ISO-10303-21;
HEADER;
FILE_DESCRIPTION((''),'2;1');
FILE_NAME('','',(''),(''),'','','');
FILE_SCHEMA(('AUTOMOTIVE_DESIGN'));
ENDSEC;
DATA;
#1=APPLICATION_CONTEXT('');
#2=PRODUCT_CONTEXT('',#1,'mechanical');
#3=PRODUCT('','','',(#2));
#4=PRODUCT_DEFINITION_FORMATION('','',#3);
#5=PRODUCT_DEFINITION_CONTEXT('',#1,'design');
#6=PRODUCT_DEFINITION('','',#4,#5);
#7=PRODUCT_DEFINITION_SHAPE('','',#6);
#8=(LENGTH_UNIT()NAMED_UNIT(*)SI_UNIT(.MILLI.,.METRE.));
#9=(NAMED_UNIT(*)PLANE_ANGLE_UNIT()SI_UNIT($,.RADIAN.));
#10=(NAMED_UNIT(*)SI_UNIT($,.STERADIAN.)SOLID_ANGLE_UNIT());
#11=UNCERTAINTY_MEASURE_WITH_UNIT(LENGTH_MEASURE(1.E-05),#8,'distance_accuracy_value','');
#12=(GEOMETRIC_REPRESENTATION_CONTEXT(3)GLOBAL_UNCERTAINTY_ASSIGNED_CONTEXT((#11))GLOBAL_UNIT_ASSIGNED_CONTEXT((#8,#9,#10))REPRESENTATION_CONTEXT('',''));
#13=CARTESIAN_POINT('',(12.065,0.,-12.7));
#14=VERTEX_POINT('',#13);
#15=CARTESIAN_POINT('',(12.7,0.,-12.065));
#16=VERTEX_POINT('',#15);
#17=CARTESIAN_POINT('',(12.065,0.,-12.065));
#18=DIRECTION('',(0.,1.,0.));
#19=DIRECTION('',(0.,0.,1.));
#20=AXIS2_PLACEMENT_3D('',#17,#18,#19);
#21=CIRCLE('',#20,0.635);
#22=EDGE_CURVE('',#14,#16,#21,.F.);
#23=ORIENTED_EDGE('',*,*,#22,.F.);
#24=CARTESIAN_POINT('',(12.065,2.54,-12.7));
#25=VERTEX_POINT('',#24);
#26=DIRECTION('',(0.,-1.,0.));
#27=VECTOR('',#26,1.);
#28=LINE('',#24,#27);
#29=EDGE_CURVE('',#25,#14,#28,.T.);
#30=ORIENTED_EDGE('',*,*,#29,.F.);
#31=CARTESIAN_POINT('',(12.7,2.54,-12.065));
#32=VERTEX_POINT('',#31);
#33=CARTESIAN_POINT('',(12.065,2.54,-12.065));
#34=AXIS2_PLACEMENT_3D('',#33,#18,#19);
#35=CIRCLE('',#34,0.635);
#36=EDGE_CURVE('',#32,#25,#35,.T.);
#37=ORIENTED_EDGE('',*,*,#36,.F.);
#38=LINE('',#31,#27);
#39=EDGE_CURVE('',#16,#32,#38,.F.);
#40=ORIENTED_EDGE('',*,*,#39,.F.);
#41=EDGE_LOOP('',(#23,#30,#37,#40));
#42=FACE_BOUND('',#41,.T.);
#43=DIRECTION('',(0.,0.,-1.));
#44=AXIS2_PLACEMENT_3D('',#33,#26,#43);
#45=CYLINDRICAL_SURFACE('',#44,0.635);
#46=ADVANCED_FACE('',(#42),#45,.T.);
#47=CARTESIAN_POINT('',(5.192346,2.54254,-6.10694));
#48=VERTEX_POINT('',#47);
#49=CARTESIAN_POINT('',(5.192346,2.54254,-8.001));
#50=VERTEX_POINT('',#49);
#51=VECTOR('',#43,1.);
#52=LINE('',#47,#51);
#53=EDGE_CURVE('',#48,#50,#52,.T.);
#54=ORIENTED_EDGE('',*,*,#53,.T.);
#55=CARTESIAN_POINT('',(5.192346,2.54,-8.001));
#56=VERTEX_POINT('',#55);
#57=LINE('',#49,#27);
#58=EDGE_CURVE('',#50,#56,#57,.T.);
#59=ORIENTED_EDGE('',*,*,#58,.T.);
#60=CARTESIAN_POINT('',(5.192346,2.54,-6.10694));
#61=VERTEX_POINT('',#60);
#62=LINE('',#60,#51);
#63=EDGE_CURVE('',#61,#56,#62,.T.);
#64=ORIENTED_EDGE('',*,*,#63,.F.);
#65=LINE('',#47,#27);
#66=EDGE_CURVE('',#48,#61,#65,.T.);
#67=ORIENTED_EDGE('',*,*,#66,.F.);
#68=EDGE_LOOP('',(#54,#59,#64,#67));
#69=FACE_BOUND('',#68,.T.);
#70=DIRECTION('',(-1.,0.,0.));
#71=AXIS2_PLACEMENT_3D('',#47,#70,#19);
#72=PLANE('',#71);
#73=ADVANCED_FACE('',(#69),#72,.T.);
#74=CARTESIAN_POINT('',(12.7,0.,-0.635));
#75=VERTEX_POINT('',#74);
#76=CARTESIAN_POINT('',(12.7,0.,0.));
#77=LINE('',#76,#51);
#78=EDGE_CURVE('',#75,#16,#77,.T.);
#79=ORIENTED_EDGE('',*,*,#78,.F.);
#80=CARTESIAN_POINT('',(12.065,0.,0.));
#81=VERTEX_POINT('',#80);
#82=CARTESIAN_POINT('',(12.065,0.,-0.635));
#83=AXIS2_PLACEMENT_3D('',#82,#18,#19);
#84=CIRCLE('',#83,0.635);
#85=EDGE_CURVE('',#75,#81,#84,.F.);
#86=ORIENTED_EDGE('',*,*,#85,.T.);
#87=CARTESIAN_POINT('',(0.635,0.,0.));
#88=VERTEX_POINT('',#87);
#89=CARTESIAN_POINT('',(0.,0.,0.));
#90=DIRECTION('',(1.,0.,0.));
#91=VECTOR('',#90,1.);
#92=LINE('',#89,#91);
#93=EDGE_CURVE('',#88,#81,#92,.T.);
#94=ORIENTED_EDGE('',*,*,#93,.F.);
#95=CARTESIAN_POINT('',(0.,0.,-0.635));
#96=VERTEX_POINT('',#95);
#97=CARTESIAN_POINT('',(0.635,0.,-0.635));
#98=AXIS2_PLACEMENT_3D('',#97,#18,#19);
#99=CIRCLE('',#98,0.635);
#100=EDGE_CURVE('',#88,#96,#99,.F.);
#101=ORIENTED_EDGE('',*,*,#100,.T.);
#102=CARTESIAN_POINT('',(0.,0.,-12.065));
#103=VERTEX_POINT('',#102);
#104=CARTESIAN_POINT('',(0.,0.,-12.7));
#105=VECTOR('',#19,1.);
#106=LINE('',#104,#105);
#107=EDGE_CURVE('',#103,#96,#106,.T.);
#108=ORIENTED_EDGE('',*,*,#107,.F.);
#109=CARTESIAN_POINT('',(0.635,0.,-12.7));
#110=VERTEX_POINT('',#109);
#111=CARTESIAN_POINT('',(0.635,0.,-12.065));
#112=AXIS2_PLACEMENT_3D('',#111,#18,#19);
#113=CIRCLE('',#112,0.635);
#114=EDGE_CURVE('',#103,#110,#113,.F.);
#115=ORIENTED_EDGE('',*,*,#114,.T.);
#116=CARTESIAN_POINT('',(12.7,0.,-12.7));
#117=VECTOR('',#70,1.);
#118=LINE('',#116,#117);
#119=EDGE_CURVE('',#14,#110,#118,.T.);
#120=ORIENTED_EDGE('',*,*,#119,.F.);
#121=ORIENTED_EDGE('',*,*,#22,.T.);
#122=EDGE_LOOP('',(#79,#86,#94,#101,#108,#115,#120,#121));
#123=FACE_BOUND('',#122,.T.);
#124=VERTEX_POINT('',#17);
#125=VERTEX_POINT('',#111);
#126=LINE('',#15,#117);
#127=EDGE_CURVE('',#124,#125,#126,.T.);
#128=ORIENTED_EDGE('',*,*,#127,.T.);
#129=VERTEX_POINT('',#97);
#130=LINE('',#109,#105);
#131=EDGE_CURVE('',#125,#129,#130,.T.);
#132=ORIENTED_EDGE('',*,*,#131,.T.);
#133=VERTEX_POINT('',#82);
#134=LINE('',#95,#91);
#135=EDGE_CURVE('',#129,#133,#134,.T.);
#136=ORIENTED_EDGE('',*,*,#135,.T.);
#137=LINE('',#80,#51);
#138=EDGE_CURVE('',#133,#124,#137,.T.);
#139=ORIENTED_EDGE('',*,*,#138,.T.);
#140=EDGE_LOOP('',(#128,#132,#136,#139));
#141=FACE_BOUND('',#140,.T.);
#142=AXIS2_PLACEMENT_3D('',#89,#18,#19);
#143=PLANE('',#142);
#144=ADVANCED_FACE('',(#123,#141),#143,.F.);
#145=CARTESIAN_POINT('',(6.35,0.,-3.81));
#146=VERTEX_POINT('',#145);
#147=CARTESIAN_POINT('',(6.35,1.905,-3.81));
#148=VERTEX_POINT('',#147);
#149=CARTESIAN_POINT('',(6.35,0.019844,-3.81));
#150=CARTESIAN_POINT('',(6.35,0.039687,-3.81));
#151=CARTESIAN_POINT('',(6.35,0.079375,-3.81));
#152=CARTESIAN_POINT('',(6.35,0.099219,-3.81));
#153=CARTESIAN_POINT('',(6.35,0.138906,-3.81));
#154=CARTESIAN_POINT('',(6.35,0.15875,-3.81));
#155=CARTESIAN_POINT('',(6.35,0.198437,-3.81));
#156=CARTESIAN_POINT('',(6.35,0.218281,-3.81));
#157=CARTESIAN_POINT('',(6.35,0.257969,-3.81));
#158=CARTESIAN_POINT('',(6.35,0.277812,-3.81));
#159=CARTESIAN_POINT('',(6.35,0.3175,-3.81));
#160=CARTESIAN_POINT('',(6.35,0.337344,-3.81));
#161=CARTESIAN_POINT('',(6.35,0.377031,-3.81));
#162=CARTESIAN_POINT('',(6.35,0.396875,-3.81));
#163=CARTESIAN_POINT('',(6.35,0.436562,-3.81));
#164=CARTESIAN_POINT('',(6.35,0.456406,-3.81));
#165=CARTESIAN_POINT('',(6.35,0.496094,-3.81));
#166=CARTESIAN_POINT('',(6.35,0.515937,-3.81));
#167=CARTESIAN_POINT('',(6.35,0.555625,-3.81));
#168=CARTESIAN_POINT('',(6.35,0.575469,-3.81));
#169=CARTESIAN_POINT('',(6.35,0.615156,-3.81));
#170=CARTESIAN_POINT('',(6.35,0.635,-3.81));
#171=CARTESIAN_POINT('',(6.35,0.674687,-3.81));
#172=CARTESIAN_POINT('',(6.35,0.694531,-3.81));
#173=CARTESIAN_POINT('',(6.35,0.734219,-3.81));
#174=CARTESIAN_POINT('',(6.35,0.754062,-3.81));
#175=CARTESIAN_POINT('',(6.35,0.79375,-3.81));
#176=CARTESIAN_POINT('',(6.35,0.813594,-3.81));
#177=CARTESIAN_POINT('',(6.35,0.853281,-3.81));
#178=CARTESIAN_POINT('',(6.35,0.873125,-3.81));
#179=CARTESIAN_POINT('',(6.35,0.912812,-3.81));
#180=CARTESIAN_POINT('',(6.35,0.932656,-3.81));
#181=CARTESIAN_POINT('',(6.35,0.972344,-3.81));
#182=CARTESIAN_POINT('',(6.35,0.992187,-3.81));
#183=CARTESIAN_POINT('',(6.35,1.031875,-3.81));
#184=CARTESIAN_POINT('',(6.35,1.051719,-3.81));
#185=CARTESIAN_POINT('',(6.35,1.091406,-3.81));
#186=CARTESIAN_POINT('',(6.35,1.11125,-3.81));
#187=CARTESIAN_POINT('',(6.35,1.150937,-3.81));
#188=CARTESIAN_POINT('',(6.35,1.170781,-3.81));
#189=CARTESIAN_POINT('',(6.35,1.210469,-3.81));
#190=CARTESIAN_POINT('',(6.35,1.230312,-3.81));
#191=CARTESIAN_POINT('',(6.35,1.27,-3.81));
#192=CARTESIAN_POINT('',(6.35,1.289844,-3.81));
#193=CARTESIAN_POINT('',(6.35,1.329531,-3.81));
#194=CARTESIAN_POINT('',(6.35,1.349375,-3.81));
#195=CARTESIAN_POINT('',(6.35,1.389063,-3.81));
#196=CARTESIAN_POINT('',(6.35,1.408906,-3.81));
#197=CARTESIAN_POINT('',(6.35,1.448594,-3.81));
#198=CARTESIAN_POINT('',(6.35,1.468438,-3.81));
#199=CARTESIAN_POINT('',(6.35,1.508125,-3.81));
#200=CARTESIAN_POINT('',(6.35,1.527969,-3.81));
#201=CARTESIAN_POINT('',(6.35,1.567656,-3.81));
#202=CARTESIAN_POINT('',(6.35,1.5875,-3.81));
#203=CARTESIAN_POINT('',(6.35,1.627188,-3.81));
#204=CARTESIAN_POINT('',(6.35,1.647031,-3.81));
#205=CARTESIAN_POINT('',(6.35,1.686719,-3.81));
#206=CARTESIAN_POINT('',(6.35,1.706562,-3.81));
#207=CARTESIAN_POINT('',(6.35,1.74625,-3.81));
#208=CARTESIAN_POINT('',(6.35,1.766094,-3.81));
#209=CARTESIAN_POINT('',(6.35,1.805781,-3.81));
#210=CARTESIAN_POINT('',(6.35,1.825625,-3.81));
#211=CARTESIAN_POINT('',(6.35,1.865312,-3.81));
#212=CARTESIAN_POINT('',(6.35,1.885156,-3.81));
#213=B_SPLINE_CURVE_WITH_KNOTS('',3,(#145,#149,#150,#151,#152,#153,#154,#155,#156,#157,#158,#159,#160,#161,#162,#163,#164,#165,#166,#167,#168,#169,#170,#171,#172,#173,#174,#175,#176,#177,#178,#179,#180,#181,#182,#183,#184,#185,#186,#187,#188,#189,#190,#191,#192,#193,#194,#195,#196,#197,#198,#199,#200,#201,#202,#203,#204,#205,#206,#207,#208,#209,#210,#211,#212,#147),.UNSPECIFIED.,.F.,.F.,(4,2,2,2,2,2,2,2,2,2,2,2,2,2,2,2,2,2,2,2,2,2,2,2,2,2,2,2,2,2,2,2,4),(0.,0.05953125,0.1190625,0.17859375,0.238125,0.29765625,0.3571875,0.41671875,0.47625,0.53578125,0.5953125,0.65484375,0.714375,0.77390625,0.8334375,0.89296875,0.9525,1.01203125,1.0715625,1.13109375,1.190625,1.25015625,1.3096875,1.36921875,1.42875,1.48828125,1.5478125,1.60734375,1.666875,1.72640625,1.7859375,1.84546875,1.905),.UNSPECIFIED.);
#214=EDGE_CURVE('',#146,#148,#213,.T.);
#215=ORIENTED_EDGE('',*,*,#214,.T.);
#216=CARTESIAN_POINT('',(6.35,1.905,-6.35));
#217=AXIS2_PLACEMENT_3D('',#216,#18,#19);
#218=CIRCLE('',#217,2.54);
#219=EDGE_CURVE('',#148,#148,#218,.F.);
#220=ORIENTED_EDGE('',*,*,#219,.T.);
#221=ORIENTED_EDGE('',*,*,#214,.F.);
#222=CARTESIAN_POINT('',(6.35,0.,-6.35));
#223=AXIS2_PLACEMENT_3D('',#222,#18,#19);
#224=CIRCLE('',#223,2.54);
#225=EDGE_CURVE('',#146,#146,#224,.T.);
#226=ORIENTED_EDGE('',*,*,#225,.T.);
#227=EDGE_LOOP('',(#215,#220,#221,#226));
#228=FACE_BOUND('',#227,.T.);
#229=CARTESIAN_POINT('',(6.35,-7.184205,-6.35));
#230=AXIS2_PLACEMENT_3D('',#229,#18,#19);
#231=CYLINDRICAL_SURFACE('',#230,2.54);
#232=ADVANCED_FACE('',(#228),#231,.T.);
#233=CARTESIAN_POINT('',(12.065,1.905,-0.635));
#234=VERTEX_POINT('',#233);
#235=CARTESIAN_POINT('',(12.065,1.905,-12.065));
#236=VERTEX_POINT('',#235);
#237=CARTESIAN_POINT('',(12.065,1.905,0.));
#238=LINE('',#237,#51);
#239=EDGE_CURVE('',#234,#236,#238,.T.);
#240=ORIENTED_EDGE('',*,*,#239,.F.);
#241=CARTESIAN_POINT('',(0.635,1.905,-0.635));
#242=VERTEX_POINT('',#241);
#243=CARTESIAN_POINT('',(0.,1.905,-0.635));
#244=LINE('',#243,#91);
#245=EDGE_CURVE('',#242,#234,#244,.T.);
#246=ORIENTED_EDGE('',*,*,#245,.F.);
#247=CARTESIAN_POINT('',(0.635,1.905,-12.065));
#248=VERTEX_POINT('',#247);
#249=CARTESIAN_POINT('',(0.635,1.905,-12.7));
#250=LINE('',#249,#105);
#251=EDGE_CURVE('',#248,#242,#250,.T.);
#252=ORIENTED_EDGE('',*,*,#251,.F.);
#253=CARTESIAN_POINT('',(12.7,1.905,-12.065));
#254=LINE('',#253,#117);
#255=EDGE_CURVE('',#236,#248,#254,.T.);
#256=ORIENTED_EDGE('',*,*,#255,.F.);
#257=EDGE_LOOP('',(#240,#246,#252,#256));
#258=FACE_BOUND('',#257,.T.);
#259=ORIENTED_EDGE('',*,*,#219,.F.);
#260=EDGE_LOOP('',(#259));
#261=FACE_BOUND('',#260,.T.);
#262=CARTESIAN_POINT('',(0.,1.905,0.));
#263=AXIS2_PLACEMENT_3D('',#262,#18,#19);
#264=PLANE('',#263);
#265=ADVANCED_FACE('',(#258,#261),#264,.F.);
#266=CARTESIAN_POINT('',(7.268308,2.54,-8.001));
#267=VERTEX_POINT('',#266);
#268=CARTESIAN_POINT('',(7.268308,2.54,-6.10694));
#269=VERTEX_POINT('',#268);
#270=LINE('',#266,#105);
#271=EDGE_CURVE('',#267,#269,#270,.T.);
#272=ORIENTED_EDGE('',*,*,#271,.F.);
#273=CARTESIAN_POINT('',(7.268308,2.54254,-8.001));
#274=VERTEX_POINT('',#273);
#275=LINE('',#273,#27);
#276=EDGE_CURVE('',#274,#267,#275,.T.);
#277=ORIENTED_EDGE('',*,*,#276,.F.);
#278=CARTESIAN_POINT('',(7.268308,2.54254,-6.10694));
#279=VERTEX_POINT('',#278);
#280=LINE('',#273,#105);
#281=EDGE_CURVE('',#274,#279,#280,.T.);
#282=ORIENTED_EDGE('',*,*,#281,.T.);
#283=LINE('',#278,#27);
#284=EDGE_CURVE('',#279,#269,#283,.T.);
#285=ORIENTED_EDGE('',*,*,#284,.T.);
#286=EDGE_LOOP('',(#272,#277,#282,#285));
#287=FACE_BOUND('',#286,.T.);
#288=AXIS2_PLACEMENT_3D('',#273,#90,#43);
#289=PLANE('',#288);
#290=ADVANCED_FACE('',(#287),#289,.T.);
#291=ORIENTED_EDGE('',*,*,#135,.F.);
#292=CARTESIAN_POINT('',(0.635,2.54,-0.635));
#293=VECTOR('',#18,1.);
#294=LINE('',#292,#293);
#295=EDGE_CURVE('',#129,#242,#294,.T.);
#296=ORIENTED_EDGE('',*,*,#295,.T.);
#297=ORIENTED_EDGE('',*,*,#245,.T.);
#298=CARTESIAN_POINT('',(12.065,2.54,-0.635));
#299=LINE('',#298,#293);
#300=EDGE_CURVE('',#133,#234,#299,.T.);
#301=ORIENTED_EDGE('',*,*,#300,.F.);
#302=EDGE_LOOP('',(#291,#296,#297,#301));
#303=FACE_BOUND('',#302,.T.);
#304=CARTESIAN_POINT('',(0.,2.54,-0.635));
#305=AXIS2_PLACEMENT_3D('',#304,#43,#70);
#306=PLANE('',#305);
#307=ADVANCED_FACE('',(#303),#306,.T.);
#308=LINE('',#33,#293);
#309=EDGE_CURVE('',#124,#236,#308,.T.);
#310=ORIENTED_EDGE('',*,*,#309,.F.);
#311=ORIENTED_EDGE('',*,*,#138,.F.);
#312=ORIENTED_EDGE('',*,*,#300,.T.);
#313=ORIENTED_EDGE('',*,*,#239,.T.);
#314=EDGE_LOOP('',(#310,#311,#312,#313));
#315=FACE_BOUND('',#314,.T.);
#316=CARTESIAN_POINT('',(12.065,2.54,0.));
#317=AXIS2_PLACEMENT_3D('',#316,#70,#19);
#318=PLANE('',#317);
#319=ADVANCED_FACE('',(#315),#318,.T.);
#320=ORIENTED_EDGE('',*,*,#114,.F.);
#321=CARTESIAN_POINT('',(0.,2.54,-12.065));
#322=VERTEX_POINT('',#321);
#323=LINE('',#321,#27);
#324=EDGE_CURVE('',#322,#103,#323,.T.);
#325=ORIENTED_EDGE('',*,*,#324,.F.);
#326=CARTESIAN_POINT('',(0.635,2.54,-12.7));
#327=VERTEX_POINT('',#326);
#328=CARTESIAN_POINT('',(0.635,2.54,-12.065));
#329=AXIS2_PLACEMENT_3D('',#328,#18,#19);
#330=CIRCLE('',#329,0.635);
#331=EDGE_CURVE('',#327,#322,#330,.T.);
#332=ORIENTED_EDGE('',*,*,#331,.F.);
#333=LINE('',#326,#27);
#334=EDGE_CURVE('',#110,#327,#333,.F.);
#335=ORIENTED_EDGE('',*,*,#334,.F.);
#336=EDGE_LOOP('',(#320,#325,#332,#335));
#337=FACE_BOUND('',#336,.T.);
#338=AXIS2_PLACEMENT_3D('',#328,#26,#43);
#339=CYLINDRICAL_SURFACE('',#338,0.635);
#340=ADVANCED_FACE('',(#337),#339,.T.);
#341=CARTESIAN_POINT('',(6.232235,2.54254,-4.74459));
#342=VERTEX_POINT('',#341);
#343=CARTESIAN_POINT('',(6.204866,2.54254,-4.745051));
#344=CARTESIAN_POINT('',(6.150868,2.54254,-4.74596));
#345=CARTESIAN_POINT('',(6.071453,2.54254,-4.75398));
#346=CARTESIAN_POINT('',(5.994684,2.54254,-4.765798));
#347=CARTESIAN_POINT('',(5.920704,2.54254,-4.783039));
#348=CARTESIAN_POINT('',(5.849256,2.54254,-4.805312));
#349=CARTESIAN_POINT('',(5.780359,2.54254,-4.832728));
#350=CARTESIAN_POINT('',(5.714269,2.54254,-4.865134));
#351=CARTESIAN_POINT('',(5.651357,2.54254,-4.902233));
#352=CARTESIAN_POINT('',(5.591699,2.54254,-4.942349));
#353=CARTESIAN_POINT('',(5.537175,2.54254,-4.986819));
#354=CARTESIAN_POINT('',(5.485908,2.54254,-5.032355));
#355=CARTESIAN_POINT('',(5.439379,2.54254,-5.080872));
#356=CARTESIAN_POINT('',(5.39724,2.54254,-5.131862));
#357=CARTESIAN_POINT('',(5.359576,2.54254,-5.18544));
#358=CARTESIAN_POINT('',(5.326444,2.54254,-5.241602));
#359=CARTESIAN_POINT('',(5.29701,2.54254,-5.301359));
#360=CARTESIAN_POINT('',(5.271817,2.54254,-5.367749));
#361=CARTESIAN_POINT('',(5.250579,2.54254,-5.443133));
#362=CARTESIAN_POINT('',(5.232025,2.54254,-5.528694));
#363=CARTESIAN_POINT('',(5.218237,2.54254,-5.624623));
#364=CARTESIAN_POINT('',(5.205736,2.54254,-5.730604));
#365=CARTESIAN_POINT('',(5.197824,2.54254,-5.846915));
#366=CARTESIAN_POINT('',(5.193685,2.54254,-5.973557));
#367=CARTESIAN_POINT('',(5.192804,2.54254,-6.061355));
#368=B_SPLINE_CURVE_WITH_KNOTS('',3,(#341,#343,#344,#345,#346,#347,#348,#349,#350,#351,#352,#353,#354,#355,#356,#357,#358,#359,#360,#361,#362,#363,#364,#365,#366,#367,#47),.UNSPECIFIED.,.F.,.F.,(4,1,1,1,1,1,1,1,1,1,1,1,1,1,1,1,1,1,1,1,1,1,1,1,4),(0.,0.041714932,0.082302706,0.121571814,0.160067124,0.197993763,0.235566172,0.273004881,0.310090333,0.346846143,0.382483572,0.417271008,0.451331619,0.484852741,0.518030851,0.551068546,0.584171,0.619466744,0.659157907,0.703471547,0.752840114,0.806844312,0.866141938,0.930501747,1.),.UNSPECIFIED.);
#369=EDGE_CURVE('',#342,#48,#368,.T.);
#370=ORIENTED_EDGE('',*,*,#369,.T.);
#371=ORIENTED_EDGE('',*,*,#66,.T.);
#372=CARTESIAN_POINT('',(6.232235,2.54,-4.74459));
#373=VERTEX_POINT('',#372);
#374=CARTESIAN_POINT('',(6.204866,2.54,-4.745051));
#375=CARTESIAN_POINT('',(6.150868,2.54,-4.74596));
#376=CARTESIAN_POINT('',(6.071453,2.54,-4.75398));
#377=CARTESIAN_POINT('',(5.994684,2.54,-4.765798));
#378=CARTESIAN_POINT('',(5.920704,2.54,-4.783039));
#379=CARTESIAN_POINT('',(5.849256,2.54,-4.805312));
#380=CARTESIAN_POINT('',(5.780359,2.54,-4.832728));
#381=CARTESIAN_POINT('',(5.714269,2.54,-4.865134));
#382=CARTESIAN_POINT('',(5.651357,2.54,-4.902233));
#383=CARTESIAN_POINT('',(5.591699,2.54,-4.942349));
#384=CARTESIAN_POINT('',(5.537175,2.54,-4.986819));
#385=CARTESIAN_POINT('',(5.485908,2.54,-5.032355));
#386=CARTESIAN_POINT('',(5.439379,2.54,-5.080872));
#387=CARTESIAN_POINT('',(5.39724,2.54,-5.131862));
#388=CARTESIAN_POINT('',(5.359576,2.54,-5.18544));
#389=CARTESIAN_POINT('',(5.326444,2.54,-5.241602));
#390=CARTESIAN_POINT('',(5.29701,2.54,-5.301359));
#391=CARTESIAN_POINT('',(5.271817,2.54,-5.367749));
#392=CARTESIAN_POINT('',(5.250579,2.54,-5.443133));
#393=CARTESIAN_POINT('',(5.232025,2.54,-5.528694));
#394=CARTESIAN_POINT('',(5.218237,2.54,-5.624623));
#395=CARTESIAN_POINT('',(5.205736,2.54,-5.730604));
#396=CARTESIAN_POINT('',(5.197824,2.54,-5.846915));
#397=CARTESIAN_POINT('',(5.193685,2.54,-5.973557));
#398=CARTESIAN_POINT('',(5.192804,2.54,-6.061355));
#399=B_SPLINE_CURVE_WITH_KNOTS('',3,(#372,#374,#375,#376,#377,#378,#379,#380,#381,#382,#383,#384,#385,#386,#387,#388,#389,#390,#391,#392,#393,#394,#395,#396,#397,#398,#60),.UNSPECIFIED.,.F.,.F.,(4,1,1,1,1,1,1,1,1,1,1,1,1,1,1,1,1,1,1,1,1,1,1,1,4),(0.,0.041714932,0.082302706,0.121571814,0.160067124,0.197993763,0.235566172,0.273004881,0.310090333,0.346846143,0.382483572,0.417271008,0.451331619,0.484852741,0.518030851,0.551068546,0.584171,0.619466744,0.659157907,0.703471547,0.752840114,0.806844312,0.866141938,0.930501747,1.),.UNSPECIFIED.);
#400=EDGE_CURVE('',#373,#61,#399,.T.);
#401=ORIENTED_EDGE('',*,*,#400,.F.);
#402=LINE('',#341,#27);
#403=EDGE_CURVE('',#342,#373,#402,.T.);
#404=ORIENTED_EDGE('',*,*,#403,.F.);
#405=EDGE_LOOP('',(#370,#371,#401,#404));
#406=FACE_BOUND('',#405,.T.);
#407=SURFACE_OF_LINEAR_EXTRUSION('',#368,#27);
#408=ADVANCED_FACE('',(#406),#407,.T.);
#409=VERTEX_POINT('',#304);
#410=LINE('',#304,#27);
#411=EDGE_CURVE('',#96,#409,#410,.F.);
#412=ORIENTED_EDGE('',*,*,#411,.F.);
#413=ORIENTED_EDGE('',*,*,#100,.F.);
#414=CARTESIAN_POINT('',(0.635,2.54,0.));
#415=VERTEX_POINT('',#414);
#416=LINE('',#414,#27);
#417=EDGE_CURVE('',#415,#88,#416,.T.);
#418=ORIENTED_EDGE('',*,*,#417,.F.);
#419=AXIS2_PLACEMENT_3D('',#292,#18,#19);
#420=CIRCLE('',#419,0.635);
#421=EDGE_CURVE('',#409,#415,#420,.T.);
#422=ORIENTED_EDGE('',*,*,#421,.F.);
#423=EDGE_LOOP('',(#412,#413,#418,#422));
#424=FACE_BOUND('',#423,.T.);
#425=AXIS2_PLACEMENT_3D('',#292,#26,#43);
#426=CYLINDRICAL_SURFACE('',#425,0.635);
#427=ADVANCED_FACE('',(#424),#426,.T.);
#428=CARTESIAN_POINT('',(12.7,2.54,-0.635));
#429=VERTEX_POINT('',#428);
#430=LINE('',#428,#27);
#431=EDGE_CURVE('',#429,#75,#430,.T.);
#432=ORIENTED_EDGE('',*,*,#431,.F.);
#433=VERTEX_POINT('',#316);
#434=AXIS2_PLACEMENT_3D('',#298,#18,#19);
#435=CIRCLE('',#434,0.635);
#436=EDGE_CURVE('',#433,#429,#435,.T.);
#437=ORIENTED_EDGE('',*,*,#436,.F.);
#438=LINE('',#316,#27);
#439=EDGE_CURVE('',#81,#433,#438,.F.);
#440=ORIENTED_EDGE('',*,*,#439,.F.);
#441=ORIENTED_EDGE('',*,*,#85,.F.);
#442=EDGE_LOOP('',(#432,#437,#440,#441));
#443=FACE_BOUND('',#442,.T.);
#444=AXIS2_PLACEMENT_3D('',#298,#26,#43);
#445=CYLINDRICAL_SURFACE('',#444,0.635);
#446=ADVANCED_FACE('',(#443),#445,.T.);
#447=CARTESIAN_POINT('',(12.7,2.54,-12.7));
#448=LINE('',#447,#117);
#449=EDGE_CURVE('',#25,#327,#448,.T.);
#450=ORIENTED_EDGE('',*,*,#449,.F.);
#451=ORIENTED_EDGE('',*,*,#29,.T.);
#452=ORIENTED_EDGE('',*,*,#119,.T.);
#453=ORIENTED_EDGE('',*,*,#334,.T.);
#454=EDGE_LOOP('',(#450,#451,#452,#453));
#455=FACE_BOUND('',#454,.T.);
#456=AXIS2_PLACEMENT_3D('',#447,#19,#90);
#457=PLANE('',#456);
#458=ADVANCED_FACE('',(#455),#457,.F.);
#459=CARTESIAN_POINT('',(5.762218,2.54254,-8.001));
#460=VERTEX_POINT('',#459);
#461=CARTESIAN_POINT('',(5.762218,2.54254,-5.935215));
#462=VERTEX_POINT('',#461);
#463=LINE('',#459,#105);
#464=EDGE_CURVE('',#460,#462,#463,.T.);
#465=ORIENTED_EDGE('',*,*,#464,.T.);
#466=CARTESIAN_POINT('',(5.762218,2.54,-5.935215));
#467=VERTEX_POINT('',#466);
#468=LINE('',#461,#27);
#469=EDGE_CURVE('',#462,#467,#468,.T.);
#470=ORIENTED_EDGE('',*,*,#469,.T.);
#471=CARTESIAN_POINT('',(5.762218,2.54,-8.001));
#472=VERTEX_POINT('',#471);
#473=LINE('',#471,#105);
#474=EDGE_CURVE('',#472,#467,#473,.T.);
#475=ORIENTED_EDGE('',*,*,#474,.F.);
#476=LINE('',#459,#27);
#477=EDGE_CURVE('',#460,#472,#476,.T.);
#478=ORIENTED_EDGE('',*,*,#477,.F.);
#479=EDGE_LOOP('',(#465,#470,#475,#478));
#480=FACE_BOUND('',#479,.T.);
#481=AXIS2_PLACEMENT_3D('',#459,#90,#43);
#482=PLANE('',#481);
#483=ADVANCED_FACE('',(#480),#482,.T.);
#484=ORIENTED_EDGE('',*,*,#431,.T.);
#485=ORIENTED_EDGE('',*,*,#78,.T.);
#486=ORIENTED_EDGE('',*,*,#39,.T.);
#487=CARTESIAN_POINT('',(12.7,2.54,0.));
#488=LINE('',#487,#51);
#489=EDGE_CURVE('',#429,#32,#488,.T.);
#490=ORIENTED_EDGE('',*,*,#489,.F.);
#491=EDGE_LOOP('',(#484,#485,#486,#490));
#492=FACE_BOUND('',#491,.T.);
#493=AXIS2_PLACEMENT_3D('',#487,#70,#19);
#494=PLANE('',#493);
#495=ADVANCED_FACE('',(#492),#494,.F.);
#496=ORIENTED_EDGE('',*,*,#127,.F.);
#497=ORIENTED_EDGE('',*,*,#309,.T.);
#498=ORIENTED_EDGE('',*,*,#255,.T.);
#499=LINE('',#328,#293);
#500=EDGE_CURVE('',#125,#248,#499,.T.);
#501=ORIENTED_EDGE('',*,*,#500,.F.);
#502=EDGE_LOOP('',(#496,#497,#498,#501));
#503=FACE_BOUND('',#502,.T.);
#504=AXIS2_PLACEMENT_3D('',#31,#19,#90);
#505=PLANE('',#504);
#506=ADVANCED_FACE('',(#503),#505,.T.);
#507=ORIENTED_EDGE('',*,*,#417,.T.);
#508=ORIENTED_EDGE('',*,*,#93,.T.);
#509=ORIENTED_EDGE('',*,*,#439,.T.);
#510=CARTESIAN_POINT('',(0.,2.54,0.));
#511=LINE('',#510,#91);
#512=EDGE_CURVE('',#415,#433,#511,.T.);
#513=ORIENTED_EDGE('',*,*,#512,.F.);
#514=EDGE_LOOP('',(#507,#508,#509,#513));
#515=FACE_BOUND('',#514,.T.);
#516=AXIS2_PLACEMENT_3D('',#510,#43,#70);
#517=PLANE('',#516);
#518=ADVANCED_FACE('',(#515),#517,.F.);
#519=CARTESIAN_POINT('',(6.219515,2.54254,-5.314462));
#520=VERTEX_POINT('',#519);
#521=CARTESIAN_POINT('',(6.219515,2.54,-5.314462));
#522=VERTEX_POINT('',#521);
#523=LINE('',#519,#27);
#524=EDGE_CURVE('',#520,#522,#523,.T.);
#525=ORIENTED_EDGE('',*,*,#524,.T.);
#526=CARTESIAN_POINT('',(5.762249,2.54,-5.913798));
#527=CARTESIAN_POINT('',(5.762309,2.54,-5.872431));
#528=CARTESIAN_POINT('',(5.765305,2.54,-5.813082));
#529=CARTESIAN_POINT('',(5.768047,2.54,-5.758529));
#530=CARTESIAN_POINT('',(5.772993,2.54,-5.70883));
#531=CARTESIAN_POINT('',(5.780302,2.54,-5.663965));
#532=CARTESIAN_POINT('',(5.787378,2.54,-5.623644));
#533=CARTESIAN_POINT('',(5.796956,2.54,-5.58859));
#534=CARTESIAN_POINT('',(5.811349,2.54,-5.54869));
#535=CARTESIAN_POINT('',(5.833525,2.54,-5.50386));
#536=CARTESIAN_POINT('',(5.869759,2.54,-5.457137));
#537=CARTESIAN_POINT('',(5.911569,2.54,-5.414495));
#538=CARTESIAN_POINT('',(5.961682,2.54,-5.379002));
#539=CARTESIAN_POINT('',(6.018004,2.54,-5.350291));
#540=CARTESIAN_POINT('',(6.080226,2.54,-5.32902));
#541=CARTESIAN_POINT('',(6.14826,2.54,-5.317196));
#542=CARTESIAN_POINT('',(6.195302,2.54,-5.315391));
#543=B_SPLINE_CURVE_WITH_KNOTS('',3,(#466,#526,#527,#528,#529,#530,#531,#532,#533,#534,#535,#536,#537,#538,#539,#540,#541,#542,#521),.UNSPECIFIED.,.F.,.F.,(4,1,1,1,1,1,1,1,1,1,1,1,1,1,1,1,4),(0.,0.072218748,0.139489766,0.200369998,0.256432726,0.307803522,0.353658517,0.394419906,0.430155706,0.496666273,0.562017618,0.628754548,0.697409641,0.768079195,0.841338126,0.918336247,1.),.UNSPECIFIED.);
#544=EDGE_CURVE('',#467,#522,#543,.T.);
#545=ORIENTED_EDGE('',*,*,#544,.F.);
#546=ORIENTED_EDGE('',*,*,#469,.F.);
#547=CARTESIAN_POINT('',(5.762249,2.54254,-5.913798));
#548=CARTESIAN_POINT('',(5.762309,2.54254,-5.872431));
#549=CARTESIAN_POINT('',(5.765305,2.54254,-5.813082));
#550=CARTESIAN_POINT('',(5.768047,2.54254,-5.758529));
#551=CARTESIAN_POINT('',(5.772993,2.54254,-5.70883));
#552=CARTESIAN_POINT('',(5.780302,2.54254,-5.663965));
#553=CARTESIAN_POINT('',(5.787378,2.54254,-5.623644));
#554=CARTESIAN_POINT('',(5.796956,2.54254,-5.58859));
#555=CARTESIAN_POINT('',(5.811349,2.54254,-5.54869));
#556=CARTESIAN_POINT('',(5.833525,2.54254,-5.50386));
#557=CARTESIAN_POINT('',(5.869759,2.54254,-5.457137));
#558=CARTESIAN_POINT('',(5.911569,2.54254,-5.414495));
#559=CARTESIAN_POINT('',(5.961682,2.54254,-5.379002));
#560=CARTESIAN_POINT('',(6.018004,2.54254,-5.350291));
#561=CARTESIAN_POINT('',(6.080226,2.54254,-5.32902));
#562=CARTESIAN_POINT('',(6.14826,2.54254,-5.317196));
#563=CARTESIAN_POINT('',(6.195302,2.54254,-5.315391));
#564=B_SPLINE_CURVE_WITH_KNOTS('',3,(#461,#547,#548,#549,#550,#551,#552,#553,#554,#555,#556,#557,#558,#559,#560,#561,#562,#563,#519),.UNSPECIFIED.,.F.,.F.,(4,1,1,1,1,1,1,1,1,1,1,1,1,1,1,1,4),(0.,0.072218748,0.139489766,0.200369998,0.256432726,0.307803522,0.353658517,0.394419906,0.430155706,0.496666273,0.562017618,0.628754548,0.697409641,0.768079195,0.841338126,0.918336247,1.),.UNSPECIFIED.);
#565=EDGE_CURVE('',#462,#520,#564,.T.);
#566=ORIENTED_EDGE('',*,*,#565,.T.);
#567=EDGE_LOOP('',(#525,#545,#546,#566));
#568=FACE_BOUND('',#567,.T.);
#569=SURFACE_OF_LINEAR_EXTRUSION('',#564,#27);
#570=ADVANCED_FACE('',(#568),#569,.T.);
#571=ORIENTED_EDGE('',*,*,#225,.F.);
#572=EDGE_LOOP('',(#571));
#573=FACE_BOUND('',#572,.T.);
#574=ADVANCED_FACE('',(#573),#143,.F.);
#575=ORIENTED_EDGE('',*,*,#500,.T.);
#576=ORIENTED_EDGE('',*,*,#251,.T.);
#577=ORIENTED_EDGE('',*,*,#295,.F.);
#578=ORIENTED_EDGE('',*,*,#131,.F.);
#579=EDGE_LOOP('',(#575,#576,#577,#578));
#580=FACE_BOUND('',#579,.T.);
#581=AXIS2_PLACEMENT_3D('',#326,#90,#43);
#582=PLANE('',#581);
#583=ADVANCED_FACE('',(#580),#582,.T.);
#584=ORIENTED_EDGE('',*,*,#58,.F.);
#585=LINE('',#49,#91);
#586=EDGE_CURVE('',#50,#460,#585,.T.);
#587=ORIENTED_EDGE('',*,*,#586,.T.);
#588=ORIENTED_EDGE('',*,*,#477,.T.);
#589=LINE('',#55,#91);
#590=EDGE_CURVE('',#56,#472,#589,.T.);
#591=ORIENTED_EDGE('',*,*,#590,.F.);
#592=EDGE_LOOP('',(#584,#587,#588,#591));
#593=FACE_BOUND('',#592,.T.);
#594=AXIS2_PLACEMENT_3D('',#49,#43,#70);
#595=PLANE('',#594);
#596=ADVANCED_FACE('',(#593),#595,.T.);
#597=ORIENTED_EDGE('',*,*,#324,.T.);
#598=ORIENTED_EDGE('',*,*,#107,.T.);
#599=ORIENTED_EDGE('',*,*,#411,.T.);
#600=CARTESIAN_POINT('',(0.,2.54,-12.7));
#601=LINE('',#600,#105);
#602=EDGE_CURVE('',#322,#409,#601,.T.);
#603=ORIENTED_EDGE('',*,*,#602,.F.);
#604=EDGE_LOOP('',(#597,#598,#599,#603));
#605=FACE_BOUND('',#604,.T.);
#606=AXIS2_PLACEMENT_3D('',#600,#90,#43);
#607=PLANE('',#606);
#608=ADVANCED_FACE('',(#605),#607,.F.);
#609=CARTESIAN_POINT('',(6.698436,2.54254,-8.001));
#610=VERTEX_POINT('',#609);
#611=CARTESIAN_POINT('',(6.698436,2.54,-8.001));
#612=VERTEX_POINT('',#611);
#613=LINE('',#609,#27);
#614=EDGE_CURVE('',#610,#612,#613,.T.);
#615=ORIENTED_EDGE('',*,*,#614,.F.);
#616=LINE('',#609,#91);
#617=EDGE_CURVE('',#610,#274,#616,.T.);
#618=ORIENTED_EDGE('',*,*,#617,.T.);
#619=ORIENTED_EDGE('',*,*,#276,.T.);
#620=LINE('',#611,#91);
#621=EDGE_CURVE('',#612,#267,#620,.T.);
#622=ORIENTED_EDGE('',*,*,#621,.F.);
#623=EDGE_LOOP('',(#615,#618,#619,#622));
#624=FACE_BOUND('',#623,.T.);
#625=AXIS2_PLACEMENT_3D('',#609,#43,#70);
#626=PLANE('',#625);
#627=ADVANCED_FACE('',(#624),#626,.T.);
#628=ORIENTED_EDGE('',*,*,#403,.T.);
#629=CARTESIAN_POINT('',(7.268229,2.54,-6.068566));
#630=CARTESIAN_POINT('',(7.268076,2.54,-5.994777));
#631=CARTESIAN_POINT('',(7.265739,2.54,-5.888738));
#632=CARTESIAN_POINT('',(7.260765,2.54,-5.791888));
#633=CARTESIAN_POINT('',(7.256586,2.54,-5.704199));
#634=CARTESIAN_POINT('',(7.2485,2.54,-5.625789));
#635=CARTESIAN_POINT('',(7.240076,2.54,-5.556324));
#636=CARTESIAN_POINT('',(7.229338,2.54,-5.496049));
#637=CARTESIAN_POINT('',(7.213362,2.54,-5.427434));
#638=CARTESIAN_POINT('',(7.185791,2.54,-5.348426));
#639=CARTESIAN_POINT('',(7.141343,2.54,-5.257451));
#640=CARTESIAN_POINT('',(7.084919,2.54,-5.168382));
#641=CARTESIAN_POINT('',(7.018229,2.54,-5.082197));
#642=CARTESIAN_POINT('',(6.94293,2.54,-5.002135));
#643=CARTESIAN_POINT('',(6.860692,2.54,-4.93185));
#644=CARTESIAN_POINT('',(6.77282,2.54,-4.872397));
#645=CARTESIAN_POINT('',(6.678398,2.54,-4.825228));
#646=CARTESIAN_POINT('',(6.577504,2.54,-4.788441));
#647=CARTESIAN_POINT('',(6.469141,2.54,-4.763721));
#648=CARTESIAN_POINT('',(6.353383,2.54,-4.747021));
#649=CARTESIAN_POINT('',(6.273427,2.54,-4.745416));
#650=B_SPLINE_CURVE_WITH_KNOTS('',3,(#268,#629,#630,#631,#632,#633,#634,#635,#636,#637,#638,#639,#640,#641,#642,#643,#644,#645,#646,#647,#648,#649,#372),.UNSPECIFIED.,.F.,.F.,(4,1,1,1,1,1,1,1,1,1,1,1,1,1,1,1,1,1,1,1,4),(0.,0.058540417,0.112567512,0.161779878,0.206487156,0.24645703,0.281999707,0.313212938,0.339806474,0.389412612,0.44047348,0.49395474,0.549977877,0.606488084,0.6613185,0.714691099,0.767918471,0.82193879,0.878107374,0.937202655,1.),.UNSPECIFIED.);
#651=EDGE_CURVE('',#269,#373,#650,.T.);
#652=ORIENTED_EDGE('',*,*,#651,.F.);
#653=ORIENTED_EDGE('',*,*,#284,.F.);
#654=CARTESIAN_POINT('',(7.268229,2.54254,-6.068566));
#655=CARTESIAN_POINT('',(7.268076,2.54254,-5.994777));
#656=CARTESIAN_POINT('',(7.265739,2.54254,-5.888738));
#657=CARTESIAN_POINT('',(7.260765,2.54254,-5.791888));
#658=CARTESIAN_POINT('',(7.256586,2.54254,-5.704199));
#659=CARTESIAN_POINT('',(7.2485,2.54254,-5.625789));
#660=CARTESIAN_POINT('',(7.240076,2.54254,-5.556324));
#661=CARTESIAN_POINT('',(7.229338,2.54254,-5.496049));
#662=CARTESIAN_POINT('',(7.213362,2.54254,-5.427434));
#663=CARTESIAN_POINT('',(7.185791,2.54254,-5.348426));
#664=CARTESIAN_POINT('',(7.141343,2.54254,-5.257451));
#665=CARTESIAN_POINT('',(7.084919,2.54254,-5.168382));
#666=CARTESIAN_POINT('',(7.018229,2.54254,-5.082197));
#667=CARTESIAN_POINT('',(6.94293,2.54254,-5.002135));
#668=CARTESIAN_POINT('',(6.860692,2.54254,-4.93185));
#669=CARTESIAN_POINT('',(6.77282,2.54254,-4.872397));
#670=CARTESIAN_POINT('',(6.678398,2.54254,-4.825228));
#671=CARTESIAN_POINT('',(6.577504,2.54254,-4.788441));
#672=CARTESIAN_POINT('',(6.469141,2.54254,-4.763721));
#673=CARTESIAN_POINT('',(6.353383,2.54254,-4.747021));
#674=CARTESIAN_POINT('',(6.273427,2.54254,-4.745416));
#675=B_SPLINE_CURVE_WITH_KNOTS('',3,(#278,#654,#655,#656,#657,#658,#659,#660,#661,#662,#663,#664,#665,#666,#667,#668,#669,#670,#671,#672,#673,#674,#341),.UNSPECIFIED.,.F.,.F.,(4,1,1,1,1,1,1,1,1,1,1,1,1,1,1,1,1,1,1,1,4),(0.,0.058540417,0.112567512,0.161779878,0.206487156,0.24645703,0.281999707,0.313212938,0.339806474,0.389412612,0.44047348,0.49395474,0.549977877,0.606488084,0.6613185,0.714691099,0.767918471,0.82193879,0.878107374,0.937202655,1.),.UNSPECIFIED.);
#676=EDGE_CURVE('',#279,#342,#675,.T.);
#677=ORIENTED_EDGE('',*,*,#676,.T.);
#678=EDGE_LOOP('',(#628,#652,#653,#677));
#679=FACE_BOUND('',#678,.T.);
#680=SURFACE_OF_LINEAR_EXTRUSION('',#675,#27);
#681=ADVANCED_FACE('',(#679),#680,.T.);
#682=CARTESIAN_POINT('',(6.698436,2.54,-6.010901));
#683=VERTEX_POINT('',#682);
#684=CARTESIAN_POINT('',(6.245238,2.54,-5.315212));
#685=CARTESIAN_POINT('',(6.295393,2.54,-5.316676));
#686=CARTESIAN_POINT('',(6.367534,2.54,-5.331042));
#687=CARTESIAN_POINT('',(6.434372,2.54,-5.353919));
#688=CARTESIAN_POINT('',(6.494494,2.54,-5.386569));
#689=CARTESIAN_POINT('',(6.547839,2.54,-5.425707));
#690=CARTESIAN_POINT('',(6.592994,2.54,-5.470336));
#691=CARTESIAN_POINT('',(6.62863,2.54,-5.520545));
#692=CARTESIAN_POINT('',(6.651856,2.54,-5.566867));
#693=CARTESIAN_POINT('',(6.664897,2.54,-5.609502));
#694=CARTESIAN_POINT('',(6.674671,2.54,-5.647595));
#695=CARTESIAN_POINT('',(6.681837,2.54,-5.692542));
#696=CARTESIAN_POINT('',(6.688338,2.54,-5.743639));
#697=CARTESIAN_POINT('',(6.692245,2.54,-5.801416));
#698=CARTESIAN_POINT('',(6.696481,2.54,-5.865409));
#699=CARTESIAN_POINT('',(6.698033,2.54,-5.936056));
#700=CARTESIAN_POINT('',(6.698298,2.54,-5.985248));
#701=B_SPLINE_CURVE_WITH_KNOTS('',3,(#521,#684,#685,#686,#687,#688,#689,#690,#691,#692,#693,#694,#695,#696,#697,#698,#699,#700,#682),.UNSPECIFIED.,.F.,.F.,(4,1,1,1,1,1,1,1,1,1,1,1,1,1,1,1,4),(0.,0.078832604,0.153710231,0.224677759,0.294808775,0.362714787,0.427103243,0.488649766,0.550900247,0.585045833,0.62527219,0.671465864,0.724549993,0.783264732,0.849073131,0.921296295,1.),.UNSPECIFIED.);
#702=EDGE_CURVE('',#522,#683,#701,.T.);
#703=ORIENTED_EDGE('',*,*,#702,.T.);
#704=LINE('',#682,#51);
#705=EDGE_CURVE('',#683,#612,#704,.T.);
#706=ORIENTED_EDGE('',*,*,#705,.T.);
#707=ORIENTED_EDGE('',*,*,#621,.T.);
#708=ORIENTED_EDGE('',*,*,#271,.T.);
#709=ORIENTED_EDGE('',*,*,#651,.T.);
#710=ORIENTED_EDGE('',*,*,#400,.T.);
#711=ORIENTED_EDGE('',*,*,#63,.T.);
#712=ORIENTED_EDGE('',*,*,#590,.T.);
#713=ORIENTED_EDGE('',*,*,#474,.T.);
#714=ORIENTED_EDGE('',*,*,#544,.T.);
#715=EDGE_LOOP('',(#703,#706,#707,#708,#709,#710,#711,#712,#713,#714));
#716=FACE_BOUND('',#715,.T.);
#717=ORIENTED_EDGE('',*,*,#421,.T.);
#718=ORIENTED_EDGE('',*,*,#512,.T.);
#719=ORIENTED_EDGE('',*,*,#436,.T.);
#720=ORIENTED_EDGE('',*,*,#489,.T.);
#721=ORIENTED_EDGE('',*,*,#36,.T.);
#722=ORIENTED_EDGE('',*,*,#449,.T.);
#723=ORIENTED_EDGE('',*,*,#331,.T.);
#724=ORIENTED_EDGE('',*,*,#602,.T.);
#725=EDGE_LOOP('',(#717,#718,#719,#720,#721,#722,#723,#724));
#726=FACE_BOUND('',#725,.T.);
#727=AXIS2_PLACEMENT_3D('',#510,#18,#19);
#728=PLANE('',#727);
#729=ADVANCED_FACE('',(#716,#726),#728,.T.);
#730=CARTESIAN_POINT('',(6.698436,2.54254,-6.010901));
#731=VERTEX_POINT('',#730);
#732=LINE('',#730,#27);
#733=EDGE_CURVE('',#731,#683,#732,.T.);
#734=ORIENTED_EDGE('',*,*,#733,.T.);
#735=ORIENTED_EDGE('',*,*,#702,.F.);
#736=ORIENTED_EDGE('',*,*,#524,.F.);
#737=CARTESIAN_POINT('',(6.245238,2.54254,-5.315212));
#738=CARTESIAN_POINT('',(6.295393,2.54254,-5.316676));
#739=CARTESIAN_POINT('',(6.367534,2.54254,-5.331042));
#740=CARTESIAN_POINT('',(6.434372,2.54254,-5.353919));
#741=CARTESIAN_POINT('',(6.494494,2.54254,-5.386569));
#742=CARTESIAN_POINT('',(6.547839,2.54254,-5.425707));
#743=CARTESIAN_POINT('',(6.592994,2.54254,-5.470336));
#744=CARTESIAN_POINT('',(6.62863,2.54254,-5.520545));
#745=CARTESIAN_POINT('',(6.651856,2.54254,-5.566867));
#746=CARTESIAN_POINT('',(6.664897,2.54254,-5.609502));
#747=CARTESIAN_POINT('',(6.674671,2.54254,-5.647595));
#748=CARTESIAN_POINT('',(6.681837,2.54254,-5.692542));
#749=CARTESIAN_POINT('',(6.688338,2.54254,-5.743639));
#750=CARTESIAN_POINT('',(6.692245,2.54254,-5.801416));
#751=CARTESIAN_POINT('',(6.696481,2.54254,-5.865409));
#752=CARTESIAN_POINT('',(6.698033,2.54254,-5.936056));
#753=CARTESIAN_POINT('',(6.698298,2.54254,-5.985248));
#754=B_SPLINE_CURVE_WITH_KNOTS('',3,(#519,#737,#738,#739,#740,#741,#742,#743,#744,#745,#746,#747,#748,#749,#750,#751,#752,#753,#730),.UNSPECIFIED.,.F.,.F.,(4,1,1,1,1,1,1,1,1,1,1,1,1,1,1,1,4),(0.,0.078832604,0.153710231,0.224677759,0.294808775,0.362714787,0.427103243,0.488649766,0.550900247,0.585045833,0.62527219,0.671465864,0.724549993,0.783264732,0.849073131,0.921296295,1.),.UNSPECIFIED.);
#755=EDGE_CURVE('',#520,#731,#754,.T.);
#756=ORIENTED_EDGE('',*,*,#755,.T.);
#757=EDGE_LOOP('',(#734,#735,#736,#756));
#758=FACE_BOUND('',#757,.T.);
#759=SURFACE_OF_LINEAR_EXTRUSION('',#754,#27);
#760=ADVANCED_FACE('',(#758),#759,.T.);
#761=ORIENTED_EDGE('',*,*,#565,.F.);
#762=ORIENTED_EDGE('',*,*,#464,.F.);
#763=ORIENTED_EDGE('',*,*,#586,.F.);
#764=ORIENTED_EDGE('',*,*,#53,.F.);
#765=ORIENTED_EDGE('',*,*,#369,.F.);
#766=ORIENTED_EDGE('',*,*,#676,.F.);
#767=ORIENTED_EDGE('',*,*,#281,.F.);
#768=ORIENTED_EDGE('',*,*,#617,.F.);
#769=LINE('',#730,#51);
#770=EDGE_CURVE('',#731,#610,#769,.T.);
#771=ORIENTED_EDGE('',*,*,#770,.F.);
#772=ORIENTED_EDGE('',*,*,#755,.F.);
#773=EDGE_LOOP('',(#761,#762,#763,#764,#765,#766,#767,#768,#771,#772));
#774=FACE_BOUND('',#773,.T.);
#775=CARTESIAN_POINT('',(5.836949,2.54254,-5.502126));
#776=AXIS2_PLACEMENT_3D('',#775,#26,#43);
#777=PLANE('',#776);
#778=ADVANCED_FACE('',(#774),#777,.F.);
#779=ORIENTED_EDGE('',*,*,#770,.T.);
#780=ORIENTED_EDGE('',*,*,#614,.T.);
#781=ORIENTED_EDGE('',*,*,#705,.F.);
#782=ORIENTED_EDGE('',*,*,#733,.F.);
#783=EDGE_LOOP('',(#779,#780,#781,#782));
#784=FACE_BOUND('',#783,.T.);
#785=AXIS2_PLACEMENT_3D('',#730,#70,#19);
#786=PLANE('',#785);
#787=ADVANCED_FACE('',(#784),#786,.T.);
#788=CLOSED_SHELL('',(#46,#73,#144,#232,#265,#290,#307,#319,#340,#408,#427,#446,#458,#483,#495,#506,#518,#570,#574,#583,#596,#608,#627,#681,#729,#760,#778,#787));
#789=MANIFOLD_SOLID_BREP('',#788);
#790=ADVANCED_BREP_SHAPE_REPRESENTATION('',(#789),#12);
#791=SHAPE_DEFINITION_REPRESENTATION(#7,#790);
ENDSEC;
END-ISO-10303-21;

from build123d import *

# Parameters (mm, degrees)
SKETCH1_W           = 12.7
SKETCH1_H           = 12.7
BOSS_EXTRUDE1_DEPTH = 2.54
FILLET1_R           = 0.635
SHELL1_START        = 0.635
SHELL1_OUTLINE_W    = 1.905
SHELL1_OUTLINE_H    = 11.43
SHELL1_DEPTH        = 11.43
SKETCH2_R           = 2.54
BOSS_EXTRUDE2_DEPTH = 1.905
BOSS_EXTRUDE3_DEPTH = 0.00254


# Read off the part's stored shape, not the designer's step: Shell1
with BuildPart() as part:
    # Sketch1 → Boss-Extrude1 (new body)
    with BuildSketch(Plane(origin=(0, 0, 0), x_dir=(1, 0, 0), z_dir=(0, 1, 0))):
        with Locations((6.35, 6.35)):
            Rectangle(SKETCH1_W, SKETCH1_H)
    extrude(amount=BOSS_EXTRUDE1_DEPTH)

    # Fillet1
    fillet1_edges = [part.edges().sort_by_distance(p)[0] for p in [
        (0, 1.27, -12.7),
        (12.7, 1.27, -12.7),
        (12.7, 1.27, 0),
        (0, 1.27, 0),
    ]]
    fillet(fillet1_edges, radius=FILLET1_R)

    # Shell1 outline → Shell1 (cut)
    with BuildSketch(Plane.YZ.offset(SHELL1_START)):
        with Locations((0.9525, -6.35)):
            Rectangle(SHELL1_OUTLINE_W, SHELL1_OUTLINE_H)
    extrude(amount=SHELL1_DEPTH, mode=Mode.SUBTRACT)

    # Sketch2 → Boss-Extrude2 (add)
    with BuildSketch(Plane(origin=(0, 1.905, 0), x_dir=(-1, 0, 0), z_dir=(0, -1, 0))):
        with Locations(Location((-6.35, 6.35, 0), (0, 0, 270))):
            Circle(SKETCH2_R)
    extrude(amount=BOSS_EXTRUDE2_DEPTH)

    # Sketch3 → Boss-Extrude3 (add)
    with BuildSketch(Plane(origin=(0, 2.54, 0), x_dir=(1, 0, 0), z_dir=(0, 1, 0))):
        with BuildLine():
            Line((5.192346154, 8.001), (5.762217949, 8.001))
            Line((5.762217949, 8.001), (5.762217949, 5.935214744))
            add(Edge.make_bspline(
                [(5.762217949, 5.935214744), (5.762248936, 5.913797578), (5.762308786, 5.872430544), (5.765304944, 5.813082394), (5.768046636, 5.758529018), (5.772993425, 5.70883014), (5.780301528, 5.663964501), (5.787378157, 5.6236439), (5.796955674, 5.588590232), (5.811349151, 5.54868998), (5.833524775, 5.503859868), (5.869758513, 5.457136896), (5.911569146, 5.414495403), (5.961681599, 5.37900224), (6.018003565, 5.35029147), (6.080225578, 5.329019967), (6.148259929, 5.317195835), (6.195301951, 5.315390665), (6.219514623, 5.314461538)],
                knots=[0, 0, 0, 0, 1.155499968, 2.231836252, 3.205919964, 4.102923608, 4.924856345, 5.658536265, 6.31071849, 6.882491295, 7.94666036, 8.992281882, 10.060072772, 11.158554251, 12.289267114, 13.461410017, 14.693379945, 16, 16, 16, 16], degree=3))
            add(Edge.make_bspline(
                [(6.219514623, 5.314461538), (6.2452376, 5.315212154), (6.29539305, 5.316675726), (6.367533681, 5.331042272), (6.434372384, 5.353918735), (6.494493956, 5.386569277), (6.547838568, 5.425706674), (6.592993664, 5.47033557), (6.628629899, 5.520544979), (6.651856272, 5.566866983), (6.664896736, 5.609502353), (6.674671214, 5.647595439), (6.681836988, 5.692541509), (6.688338013, 5.743638634), (6.692244628, 5.801416082), (6.696480716, 5.865409199), (6.698033281, 5.936055843), (6.698297904, 5.985248427), (6.698435897, 6.010900841)],
                knots=[0, 0, 0, 0, 1.261321664, 2.459363699, 3.594844139, 4.716940403, 5.803436589, 6.833651888, 7.818396249, 8.814403945, 9.360733334, 10.004355033, 10.743453831, 11.592799886, 12.532235708, 13.585170094, 14.740740724, 16, 16, 16, 16], degree=3))
            Line((6.698435897, 6.010900841), (6.698435897, 8.001))
            Line((6.698435897, 8.001), (7.268307692, 8.001))
            Line((7.268307692, 8.001), (7.268307692, 6.106939503))
            add(Edge.make_bspline(
                [(7.268307692, 6.106939503), (7.268228555, 6.068565928), (7.268076382, 5.994777286), (7.265739466, 5.888737813), (7.260764595, 5.791887765), (7.256586276, 5.704198842), (7.2484998, 5.625789174), (7.240075588, 5.55632393), (7.229338205, 5.49604928), (7.213361625, 5.427433916), (7.185790778, 5.348425837), (7.141342957, 5.257451459), (7.084919326, 5.168382033), (7.018229414, 5.082197383), (6.942930403, 5.00213462), (6.860691833, 4.931849878), (6.772820271, 4.872396565), (6.678397522, 4.825228387), (6.577503944, 4.788440763), (6.469141271, 4.763721333), (6.353383397, 4.747020576), (6.273427246, 4.745416263), (6.232234976, 4.744589744)],
                knots=[0, 0, 0, 0, 1.170808336, 2.251350247, 3.235597562, 4.129743112, 4.929140599, 5.639994148, 6.264258765, 6.79612947, 7.788252245, 8.809469599, 9.879094798, 10.999557536, 12.129761673, 13.226370002, 14.293821979, 15.358369427, 16.438775801, 17.562147481, 18.744053101, 20, 20, 20, 20], degree=3))
            add(Edge.make_bspline(
                [(6.232234976, 4.744589744), (6.204866012, 4.745050738), (6.150867608, 4.745960269), (6.071453481, 4.753979964), (5.994684128, 4.765797979), (5.920703797, 4.783039245), (5.849255717, 4.80531174), (5.780358869, 4.832727631), (5.714269291, 4.865133995), (5.65135681, 4.902232764), (5.591698847, 4.942348696), (5.537174548, 4.986818895), (5.485907605, 5.032354622), (5.439379097, 5.080872214), (5.397239555, 5.131862319), (5.359575764, 5.185440497), (5.326443681, 5.24160199), (5.297009886, 5.301359104), (5.27181743, 5.367749078), (5.250579243, 5.443133431), (5.232025064, 5.528693737), (5.218236692, 5.624622759), (5.205736074, 5.730604326), (5.197823871, 5.846914536), (5.193684642, 5.973556726), (5.19280359, 6.061355131), (5.192346154, 6.106939503)],
                knots=[0, 0, 0, 0, 1.001158378, 1.975264943, 2.917723546, 3.841610987, 4.75185031, 5.653588123, 6.552117133, 7.442167995, 8.324307438, 9.179605724, 10.014504199, 10.831958861, 11.636465792, 12.43274043, 13.225645099, 14.020104002, 14.867201867, 15.819789774, 16.883317127, 18.068162734, 19.364263498, 20.787406516, 22.332041935, 24, 24, 24, 24], degree=3))
            Line((5.192346154, 6.106939503), (5.192346154, 8.001))
        make_face()
    extrude(amount=BOSS_EXTRUDE3_DEPTH)


solid = part.part
